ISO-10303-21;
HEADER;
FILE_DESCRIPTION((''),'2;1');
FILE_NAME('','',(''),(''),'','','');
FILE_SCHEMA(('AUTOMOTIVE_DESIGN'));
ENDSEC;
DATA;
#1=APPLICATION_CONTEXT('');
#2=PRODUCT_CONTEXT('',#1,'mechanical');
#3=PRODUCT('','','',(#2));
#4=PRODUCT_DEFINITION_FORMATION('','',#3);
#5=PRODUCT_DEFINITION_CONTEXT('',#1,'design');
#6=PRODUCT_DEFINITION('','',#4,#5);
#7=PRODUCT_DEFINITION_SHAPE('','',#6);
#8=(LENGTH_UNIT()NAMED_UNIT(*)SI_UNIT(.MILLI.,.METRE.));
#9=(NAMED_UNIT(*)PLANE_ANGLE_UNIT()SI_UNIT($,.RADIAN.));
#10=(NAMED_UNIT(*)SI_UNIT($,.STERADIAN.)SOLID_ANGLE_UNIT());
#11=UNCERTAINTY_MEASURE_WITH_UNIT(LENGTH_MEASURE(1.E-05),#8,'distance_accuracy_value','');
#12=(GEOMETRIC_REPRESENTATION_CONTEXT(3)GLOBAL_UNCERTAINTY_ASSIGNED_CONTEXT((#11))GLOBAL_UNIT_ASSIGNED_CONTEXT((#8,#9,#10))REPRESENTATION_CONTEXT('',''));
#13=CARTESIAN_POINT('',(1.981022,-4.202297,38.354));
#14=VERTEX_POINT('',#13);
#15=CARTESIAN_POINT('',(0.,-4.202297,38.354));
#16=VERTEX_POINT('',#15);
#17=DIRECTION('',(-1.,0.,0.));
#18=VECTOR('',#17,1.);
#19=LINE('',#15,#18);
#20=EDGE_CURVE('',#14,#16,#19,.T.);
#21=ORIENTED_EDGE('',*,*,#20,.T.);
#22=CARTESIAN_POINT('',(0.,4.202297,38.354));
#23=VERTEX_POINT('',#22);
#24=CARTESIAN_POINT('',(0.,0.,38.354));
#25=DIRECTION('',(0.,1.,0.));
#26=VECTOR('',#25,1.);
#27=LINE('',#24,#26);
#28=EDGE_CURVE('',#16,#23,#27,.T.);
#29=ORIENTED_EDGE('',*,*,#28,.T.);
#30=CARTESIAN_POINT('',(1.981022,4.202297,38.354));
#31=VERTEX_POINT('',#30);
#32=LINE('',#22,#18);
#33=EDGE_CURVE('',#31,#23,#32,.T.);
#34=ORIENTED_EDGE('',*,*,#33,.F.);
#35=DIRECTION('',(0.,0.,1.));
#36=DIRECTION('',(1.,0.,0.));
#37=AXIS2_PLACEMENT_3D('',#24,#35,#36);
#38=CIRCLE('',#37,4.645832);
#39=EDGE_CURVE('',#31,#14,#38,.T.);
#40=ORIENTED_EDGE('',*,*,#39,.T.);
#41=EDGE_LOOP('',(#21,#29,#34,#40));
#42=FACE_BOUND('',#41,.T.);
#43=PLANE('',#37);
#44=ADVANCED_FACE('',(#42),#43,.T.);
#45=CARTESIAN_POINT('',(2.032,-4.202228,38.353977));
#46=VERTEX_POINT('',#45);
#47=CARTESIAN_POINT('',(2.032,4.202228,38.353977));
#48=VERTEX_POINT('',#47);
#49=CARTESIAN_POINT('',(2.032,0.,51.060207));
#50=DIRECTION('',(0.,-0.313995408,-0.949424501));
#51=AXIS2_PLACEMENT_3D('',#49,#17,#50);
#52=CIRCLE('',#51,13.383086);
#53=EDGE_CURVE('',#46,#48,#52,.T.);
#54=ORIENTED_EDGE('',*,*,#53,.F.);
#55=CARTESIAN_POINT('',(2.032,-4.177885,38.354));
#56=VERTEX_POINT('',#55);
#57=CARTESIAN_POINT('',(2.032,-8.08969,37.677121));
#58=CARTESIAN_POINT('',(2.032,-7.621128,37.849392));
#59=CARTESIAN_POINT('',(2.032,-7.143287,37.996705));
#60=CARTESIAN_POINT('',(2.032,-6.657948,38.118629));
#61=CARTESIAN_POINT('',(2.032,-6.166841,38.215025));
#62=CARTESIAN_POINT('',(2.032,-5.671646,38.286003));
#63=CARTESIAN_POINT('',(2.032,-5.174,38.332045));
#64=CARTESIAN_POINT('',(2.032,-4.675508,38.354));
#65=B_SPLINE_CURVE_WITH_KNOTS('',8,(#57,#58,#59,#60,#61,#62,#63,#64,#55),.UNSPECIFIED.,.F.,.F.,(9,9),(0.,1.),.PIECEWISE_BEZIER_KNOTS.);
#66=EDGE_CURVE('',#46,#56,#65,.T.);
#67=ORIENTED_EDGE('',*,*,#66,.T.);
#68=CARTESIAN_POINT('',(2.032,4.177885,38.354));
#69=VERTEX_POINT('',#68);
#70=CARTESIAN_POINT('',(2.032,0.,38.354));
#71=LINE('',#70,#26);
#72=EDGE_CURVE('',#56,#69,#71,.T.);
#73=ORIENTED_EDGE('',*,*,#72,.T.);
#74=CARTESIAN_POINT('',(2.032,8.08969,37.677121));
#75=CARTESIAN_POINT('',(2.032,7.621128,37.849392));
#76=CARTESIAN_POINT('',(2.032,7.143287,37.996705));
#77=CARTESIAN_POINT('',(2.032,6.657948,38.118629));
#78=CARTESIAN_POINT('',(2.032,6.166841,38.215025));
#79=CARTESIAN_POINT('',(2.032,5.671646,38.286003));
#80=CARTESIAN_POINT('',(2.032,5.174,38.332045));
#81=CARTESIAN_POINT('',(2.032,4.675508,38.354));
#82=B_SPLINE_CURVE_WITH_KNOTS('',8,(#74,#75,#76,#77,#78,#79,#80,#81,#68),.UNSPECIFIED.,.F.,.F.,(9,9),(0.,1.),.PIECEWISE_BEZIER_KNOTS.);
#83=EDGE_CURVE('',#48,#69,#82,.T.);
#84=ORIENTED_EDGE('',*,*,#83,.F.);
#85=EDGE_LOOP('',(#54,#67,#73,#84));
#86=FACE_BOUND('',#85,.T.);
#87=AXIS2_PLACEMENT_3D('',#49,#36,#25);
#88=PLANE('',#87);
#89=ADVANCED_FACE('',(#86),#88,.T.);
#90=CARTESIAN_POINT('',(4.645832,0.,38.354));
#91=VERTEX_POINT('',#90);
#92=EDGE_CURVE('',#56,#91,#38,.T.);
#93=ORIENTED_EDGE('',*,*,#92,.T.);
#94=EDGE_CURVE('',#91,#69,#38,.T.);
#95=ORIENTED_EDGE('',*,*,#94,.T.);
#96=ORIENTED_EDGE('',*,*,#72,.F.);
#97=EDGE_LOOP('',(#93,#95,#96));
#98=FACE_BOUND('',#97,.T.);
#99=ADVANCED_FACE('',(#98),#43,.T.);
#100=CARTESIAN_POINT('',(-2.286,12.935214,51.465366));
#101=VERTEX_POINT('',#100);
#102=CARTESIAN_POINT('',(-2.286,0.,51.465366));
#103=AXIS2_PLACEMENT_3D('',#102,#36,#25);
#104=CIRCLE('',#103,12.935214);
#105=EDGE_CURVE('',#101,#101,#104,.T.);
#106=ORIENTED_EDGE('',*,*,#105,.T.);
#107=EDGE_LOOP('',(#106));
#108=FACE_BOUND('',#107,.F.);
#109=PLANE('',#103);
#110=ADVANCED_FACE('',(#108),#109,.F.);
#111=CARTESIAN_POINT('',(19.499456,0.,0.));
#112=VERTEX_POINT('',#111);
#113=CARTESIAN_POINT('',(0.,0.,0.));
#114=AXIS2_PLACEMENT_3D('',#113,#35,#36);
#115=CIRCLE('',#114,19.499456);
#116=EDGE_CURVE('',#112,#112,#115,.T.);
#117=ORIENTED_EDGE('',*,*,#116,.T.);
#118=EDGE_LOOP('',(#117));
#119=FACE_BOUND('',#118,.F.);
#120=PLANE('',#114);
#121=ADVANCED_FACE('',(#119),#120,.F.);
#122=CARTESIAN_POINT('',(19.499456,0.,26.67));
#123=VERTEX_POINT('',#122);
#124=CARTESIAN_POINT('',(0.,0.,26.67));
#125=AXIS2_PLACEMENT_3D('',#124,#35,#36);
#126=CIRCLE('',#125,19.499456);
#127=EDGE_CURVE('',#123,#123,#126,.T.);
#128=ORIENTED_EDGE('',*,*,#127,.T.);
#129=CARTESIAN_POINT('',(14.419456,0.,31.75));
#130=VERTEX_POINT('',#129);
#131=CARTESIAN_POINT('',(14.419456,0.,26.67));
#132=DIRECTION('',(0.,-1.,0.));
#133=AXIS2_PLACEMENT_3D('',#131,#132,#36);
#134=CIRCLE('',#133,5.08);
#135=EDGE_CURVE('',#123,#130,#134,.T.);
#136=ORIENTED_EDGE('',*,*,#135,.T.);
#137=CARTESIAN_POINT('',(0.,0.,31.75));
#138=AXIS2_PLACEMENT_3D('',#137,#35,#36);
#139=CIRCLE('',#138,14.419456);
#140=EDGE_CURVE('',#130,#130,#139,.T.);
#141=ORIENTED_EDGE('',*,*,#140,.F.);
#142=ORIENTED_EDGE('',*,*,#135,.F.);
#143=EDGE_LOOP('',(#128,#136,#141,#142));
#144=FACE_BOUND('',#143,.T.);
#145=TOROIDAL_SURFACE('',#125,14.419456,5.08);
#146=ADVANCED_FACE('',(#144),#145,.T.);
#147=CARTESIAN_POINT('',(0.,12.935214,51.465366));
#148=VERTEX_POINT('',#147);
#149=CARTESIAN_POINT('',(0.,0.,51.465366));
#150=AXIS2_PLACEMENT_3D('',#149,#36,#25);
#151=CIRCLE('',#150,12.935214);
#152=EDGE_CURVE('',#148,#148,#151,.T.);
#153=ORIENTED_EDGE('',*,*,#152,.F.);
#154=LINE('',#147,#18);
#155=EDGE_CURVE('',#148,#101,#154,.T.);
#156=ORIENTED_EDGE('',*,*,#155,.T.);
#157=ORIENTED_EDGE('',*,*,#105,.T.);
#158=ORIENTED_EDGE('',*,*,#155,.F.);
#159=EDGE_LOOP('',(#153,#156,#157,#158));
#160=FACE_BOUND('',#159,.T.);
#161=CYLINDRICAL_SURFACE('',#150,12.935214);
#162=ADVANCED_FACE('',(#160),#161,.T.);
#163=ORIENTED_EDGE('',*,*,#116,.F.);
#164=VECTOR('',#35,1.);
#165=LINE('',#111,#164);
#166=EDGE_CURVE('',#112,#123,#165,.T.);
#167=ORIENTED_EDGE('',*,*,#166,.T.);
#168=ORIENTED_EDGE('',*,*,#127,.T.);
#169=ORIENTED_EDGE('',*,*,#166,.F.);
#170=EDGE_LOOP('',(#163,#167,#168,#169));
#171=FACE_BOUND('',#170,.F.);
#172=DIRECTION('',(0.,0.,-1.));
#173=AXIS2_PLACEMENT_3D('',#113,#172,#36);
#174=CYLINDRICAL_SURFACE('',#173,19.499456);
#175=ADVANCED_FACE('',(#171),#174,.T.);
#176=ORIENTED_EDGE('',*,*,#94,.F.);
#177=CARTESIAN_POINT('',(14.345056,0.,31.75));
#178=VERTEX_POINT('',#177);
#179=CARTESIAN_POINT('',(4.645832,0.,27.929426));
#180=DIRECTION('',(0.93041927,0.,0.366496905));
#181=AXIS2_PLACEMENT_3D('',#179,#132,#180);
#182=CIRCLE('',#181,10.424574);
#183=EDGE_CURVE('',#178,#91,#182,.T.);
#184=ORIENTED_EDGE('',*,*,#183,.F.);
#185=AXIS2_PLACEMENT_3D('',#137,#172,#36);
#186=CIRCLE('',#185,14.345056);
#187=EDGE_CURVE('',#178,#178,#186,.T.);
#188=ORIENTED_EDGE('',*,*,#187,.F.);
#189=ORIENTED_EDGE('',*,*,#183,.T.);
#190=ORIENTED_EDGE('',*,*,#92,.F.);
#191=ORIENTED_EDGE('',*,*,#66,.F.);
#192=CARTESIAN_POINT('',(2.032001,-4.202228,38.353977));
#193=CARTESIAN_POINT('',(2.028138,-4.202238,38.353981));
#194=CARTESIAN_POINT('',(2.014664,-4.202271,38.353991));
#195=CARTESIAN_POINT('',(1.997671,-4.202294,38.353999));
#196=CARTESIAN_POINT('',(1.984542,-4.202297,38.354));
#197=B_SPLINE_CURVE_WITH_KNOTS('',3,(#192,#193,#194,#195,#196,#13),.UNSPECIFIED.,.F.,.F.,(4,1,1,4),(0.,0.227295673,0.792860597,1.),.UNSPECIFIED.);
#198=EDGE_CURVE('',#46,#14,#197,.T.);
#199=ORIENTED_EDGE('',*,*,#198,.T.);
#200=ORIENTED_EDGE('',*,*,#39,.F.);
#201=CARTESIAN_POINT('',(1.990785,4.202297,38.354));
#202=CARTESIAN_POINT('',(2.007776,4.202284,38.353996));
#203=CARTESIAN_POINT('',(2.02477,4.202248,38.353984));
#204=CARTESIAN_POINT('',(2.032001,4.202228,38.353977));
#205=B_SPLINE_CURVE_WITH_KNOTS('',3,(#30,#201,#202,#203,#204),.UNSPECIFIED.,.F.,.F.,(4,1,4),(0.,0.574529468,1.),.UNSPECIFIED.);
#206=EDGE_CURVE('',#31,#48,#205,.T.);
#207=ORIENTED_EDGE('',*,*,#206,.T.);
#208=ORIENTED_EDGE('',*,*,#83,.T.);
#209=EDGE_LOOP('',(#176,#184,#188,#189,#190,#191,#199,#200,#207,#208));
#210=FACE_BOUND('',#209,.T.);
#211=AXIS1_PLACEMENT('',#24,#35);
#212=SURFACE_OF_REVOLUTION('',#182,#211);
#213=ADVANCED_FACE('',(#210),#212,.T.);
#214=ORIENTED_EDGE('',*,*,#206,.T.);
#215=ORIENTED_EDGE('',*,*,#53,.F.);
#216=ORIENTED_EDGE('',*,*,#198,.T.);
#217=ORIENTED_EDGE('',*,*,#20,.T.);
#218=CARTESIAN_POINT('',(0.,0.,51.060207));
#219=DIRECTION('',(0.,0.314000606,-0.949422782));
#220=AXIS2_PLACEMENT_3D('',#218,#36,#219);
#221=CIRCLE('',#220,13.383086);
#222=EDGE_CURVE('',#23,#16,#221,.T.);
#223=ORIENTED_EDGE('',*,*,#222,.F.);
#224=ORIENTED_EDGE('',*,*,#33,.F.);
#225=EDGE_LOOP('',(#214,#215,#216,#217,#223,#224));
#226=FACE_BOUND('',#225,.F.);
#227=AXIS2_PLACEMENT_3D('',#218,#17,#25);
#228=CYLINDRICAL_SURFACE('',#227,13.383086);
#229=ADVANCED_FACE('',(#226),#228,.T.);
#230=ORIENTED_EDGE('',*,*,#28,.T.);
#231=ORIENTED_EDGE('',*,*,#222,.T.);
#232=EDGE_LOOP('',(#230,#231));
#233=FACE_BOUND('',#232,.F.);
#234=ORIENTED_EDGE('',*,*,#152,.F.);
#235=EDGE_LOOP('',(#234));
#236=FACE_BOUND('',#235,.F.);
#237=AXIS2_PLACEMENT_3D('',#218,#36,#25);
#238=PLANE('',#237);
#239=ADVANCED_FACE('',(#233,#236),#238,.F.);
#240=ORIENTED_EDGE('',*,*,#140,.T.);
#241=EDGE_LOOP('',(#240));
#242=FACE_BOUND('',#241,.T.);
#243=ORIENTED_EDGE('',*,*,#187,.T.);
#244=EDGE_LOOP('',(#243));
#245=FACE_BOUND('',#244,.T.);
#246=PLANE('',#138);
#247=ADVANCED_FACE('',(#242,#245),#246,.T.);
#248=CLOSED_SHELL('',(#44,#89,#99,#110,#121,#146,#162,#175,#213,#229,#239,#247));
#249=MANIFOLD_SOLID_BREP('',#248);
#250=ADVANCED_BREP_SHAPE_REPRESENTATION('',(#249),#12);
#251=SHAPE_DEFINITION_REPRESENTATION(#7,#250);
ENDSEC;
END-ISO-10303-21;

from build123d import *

# Parameters (mm, degrees)
F0_R     = 19.4994564254
F1_DEPTH = 31.75
F2_R     = 5.08
F3_R     = 14.3450562753
F4_DEPTH = 38.354
F6_R     = 13.3830864671
F7_DEPTH = 2.032
F8_R     = 12.9352143756
F9_DEPTH = 2.286


# Not quite as in the source:
# - a fillet or chamfer that OpenCascade refuses, or shapes differently, is made with other operations: its cross-section is extruded or revolved along the edge and cut away or added


with BuildPart() as f1:
    # F0 (on Top) → F1 (new body)
    with BuildSketch(Plane.XY):
        Circle(F0_R)
    extrude(amount=F1_DEPTH)

    # F2
    f2_edges = [f1.edges().sort_by_distance(p)[0] for p in [
        (-19.499456, 0, 31.75),
    ]]
    fillet(f2_edges, radius=F2_R)

    # F3 (on Top) → F4 (join)
    with BuildSketch(Plane.XY):
        Circle(F3_R)
    extrude(amount=F4_DEPTH)

    # F5: fillet of radius 10.4245741623 on 1 edges, made by hand

    # F5_s1 → F5_t2 (revolve, cut)
    with BuildSketch(Plane.XZ):
        with BuildLine():
            ThreePointArc((14.3450562753, 31.75), (10.5128533097, 36.5462583521), (4.6458315879, 38.354))
            Line((4.6458315879, 38.354), (14.3450562753, 38.354))
            Line((14.3450562753, 38.354), (14.3450562753, 31.75))
        make_face()
    revolve(axis=Axis((0, 0, 38.354), (0, 0, 1)), mode=Mode.SUBTRACT)

    # F6 (on Right) → F7 (join)
    with BuildSketch(Plane.YZ):
        with Locations((0, 51.0602071881)):
            Circle(F6_R)
    extrude(amount=F7_DEPTH)

    # F8 (on Right) → F9 (join)
    with BuildSketch(Plane.YZ):
        with Locations((0, 51.4653660357)):
            Circle(F8_R)
    extrude(amount=-F9_DEPTH)


solid = f1.part
